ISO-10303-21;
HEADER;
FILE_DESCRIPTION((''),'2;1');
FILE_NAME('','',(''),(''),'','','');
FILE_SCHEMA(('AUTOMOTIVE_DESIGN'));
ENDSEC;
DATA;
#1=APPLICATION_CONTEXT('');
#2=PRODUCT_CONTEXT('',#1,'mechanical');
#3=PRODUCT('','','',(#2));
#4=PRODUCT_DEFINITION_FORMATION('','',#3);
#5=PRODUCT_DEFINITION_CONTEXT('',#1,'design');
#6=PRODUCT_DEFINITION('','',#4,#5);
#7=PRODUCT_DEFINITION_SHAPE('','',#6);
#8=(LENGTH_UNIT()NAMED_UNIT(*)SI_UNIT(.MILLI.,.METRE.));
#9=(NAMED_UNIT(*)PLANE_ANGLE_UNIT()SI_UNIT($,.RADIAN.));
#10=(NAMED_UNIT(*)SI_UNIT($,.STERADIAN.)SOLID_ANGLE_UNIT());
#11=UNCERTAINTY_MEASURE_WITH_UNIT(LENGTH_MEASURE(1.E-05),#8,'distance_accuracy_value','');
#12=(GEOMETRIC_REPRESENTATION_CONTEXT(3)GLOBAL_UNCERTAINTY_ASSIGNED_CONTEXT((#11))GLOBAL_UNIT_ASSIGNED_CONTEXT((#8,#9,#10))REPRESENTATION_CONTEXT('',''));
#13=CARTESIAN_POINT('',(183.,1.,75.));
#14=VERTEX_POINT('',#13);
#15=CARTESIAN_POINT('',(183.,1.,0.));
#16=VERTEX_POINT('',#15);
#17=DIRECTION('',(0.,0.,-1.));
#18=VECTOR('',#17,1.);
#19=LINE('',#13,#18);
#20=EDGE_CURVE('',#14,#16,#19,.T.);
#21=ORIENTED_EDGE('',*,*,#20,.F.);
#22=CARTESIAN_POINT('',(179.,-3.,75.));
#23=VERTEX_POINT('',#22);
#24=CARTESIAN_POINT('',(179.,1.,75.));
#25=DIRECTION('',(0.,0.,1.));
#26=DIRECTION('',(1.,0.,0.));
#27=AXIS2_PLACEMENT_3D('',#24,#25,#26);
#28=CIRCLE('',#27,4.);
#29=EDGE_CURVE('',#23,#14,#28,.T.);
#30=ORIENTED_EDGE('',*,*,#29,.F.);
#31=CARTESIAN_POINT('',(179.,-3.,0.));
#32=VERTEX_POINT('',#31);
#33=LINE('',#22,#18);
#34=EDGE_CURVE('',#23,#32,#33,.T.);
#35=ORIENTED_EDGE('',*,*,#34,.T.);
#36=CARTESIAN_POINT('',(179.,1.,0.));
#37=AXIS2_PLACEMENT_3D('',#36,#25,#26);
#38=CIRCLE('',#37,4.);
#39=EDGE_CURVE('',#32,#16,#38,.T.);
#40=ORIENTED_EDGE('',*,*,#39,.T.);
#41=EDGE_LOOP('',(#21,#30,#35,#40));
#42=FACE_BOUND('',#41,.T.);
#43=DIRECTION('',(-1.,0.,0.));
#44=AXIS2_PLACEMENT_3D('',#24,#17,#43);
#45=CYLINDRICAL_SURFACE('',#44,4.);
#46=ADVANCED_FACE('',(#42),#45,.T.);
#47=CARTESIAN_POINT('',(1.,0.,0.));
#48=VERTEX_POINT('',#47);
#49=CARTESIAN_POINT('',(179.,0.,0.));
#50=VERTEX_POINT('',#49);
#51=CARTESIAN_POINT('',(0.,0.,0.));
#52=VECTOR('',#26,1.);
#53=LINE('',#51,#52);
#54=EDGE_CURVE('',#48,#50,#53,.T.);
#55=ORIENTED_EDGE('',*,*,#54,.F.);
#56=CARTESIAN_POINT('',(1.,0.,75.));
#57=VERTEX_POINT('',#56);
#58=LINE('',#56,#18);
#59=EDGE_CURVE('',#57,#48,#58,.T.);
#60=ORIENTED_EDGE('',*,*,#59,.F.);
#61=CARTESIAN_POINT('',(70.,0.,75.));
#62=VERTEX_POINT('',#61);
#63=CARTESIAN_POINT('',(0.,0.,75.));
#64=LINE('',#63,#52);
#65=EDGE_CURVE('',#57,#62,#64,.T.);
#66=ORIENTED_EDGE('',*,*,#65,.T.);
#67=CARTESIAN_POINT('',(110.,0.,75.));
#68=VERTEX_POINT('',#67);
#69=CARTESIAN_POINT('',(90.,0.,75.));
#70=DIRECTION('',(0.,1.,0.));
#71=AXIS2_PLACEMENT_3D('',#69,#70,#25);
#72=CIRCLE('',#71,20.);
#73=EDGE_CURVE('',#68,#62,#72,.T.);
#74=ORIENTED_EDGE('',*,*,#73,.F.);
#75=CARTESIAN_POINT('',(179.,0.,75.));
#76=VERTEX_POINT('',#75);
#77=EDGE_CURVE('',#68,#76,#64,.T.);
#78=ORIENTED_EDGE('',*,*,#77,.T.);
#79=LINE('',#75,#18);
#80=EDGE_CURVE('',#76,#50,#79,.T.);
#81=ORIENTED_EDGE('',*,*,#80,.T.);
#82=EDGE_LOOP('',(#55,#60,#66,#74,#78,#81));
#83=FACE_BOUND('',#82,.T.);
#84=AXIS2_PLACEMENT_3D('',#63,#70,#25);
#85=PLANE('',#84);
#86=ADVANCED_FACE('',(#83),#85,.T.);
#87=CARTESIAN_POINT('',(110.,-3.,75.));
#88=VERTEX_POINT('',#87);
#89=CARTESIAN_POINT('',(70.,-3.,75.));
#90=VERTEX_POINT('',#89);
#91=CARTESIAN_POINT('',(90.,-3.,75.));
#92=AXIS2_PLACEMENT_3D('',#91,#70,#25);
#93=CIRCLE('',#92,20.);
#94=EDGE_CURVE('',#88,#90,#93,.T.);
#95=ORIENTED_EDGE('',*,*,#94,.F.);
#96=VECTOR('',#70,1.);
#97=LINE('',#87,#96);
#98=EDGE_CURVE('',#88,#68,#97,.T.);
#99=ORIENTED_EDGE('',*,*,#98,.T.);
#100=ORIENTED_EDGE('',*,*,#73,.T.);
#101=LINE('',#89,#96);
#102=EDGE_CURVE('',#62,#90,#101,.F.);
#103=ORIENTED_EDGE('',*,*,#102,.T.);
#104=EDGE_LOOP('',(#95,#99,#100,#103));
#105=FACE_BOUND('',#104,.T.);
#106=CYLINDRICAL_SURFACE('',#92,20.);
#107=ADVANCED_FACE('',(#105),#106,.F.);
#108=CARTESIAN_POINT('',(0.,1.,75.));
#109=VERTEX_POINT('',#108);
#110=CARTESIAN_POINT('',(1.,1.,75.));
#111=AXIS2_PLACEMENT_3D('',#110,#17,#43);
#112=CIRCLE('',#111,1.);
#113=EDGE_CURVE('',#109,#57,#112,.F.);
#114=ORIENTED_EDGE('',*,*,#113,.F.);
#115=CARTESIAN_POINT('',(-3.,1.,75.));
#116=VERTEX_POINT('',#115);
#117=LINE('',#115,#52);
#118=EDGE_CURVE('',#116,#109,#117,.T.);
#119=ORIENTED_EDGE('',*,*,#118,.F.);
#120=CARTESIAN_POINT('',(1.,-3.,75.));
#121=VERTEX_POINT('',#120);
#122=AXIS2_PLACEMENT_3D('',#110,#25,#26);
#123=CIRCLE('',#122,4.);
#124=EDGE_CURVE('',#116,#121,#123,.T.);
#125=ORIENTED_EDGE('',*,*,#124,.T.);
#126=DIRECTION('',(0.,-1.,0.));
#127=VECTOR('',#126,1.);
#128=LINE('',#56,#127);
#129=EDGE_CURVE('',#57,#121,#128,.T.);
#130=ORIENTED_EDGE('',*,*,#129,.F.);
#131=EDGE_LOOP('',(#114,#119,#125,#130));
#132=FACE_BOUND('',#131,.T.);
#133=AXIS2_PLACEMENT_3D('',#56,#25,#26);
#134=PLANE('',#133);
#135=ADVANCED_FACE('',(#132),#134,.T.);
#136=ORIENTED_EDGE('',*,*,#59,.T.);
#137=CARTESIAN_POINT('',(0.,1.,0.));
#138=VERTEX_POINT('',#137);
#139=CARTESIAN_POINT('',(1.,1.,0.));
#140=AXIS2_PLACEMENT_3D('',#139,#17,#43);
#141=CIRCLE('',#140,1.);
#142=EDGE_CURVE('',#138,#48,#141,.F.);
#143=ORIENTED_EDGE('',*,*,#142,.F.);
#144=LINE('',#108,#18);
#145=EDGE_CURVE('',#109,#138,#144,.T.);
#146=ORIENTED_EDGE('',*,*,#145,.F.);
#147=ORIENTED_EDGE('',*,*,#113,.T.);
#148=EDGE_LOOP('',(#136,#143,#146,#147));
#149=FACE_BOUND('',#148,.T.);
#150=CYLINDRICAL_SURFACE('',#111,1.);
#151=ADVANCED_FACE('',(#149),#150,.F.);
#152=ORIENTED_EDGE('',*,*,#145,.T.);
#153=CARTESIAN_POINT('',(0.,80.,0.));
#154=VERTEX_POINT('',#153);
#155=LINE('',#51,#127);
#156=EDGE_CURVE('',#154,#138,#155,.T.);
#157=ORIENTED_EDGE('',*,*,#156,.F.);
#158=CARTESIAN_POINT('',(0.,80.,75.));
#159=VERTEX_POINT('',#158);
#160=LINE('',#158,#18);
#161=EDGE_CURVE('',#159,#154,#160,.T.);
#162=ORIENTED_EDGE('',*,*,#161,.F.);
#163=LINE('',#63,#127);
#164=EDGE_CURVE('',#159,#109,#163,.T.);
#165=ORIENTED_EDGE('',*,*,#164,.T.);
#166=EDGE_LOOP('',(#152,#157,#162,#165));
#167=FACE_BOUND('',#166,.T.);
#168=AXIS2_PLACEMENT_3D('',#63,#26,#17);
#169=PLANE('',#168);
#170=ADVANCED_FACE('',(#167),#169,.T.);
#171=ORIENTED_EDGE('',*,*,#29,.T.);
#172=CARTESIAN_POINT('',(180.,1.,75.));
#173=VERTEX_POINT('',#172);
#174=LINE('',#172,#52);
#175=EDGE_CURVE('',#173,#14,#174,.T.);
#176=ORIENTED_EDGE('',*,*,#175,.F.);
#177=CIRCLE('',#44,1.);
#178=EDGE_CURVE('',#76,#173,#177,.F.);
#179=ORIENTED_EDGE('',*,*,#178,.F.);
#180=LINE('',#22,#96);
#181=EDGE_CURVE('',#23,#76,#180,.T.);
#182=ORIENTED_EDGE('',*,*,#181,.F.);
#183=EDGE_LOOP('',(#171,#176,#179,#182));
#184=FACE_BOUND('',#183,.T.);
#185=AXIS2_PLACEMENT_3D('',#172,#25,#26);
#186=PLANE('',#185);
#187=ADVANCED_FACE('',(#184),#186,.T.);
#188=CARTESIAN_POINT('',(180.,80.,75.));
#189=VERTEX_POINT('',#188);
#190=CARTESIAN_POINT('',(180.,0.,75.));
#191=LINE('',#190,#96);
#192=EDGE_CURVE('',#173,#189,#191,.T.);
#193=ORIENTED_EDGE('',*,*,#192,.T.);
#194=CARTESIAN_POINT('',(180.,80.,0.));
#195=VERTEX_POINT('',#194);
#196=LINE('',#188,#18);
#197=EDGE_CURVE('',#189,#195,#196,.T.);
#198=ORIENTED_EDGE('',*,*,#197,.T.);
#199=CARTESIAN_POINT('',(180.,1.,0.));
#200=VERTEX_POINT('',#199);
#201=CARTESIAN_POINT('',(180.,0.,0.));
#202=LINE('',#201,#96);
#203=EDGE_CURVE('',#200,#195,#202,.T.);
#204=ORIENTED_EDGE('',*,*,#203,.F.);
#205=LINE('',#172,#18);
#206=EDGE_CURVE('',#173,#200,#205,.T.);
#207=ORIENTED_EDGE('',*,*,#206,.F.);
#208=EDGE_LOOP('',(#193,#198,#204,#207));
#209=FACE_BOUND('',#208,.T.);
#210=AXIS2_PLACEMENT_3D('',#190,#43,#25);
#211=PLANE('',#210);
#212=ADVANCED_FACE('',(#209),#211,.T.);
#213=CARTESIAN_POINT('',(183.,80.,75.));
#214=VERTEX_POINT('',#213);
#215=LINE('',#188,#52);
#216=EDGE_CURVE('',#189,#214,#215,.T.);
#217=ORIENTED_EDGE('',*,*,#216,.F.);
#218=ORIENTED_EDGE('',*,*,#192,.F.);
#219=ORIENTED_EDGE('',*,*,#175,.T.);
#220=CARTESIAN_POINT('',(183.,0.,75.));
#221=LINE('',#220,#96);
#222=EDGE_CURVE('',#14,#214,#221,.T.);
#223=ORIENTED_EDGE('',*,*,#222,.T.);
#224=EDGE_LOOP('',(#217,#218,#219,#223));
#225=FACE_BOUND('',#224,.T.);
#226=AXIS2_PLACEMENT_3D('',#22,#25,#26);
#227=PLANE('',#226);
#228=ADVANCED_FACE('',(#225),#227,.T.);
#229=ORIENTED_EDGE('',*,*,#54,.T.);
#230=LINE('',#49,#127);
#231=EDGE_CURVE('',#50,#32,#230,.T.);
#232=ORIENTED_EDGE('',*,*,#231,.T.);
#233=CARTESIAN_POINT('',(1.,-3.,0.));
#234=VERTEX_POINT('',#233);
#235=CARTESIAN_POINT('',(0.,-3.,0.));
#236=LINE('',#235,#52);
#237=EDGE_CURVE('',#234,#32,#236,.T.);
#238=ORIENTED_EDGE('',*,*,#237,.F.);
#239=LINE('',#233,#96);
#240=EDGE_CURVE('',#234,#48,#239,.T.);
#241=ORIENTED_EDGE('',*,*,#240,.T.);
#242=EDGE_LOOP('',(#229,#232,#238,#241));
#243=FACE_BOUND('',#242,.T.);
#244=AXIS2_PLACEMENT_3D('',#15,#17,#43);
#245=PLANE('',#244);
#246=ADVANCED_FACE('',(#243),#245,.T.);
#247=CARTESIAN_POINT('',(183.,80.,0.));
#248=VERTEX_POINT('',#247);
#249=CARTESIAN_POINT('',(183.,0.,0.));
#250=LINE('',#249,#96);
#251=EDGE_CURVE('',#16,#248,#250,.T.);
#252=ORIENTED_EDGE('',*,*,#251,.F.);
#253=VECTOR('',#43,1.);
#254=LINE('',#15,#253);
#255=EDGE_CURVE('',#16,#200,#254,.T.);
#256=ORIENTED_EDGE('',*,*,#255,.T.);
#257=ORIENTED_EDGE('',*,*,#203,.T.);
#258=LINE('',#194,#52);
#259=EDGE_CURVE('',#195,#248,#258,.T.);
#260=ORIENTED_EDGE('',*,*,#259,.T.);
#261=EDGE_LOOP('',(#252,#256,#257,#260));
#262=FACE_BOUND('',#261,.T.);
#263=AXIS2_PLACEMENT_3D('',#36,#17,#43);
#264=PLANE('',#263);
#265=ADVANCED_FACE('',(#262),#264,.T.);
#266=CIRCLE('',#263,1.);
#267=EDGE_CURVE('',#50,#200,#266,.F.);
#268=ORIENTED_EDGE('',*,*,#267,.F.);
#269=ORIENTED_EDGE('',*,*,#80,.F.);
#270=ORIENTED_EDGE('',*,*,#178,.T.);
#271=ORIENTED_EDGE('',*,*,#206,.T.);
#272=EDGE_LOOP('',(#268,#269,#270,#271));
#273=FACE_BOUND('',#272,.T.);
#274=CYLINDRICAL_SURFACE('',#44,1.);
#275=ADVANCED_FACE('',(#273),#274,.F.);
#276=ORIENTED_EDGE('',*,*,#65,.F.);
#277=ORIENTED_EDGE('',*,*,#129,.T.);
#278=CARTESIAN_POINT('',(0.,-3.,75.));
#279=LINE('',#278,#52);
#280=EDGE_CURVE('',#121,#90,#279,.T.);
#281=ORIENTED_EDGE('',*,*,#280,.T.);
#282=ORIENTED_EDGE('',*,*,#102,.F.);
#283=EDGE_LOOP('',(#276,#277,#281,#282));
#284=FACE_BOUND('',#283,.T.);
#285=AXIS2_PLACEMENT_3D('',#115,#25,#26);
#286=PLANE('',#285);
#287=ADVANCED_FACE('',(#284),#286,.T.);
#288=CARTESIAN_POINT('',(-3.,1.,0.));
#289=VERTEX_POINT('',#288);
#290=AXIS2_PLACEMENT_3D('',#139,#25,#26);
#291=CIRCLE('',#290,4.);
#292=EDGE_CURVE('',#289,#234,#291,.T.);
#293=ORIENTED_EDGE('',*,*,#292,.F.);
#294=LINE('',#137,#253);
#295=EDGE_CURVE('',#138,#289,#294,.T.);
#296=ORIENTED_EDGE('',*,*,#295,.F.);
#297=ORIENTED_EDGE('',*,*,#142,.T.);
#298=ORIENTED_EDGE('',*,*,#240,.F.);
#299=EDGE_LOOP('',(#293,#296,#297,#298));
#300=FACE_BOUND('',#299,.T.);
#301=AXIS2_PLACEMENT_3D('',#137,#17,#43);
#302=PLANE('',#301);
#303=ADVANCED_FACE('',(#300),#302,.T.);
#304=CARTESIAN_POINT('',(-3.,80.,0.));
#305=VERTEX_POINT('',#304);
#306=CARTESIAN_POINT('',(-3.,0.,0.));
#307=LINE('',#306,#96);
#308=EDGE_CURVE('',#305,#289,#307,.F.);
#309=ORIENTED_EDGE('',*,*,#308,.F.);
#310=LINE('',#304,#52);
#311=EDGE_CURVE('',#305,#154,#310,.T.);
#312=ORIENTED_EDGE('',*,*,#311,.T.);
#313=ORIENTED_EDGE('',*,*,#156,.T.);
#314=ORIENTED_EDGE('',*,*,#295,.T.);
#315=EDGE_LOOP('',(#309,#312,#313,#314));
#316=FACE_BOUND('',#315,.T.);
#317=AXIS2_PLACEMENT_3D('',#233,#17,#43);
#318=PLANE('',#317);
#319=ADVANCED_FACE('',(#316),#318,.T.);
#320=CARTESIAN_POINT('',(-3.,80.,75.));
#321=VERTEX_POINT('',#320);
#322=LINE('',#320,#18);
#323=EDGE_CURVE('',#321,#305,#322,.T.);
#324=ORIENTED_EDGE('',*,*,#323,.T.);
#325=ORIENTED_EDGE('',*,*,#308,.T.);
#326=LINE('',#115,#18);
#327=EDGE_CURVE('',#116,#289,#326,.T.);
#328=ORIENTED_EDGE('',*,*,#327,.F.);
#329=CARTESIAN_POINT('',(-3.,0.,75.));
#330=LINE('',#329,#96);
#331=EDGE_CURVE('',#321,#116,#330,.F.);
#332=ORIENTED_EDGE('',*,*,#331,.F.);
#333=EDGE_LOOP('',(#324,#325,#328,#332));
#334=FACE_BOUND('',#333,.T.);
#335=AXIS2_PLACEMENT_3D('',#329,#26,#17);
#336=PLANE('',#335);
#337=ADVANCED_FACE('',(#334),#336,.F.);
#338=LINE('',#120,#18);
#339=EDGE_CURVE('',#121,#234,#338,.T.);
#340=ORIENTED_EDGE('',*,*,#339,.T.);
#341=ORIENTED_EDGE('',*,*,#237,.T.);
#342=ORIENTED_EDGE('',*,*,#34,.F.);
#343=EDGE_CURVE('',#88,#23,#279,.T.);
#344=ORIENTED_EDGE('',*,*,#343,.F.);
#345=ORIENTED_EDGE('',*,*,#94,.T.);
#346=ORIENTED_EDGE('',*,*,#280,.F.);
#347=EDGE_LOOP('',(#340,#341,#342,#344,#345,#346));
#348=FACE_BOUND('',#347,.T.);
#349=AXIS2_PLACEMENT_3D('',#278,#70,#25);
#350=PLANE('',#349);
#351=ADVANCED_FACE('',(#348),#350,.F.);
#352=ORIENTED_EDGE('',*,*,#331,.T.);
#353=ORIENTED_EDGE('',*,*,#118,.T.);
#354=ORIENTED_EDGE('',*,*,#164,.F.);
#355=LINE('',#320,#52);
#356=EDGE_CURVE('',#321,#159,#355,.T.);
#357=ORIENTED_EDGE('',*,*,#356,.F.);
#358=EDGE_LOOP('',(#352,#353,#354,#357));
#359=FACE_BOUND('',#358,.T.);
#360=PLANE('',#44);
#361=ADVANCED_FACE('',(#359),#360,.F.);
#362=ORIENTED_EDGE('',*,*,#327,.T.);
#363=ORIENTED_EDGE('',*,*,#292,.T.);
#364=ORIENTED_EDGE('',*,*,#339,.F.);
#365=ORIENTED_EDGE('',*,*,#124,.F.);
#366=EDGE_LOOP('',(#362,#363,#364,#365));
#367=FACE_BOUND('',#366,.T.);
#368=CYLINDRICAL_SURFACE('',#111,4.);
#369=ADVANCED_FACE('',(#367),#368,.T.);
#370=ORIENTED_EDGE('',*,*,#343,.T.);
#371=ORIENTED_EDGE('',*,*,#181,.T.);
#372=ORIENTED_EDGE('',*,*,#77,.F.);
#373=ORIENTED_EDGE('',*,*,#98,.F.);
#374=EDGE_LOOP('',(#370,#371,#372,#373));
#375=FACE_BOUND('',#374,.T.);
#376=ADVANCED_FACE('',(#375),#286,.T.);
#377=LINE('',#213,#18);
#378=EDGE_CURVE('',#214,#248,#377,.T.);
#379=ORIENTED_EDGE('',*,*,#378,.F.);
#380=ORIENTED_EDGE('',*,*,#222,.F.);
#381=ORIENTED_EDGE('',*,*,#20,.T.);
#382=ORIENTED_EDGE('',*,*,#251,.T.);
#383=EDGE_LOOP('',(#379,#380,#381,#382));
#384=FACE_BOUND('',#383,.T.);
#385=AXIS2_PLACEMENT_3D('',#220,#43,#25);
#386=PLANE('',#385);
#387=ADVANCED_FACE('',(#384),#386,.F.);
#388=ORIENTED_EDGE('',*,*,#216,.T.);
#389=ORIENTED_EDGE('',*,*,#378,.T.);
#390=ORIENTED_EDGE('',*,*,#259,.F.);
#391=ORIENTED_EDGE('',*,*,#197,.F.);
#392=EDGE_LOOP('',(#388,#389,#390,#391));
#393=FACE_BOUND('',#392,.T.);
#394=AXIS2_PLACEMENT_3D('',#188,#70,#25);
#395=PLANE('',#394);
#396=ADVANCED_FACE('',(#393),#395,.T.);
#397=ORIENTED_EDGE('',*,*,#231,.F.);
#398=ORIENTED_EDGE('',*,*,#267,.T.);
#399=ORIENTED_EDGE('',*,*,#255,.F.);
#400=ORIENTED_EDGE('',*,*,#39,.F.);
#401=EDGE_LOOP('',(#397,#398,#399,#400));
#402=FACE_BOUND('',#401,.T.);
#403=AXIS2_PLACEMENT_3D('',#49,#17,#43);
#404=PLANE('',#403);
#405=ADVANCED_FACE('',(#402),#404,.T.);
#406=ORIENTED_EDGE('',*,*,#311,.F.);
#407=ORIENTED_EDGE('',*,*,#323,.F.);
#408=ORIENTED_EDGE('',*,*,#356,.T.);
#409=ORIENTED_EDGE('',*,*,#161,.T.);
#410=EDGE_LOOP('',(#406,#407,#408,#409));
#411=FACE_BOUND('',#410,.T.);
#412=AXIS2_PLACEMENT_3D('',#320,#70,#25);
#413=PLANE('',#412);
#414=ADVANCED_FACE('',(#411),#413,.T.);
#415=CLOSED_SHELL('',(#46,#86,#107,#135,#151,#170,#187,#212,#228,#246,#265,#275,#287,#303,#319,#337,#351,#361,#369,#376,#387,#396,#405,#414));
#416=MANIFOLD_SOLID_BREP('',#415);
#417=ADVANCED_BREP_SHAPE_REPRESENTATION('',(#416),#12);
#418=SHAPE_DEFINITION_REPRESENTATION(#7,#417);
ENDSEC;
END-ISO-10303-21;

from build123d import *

# Parameters (mm, degrees)
BRIDA_BASE1_DEPTH     = 75
CROQUIS6_R            = 20
CORTAR_EXTRUIR1_DEPTH = 10


# Sheet-metal steps are written as plain solids
with BuildPart() as part:
    # Croquis1 → Brida base1 (new body)
    with BuildSketch(Plane.XY):
        with BuildLine():
            Line((180, 80), (180, 1))
            ThreePointArc((180, 1), (179.707106781, 0.292893219), (179, 0))
            Line((179, 0), (1, 0))
            ThreePointArc((1, 0), (0.292893219, 0.292893219), (0, 1))
            Line((0, 1), (0, 80))
            Line((0, 80), (-3, 80))
            Line((-3, 80), (-3, 1))
            ThreePointArc((-3, 1), (-1.828427125, -1.828427125), (1, -3))
            Line((1, -3), (179, -3))
            ThreePointArc((179, -3), (181.828427125, -1.828427125), (183, 1))
            Line((183, 1), (183, 80))
            Line((183, 80), (180, 80))
        make_face()
    extrude(amount=BRIDA_BASE1_DEPTH)

    # Croquis6 → Cortar-Extruir1 (cut)
    with BuildSketch(Plane(origin=(0, 0, 0), x_dir=(1, 0, 0), z_dir=(0, 1, 0))):
        with Locations((90, -75)):
            Circle(CROQUIS6_R)
    extrude(amount=-CORTAR_EXTRUIR1_DEPTH, mode=Mode.SUBTRACT)


solid = part.part
